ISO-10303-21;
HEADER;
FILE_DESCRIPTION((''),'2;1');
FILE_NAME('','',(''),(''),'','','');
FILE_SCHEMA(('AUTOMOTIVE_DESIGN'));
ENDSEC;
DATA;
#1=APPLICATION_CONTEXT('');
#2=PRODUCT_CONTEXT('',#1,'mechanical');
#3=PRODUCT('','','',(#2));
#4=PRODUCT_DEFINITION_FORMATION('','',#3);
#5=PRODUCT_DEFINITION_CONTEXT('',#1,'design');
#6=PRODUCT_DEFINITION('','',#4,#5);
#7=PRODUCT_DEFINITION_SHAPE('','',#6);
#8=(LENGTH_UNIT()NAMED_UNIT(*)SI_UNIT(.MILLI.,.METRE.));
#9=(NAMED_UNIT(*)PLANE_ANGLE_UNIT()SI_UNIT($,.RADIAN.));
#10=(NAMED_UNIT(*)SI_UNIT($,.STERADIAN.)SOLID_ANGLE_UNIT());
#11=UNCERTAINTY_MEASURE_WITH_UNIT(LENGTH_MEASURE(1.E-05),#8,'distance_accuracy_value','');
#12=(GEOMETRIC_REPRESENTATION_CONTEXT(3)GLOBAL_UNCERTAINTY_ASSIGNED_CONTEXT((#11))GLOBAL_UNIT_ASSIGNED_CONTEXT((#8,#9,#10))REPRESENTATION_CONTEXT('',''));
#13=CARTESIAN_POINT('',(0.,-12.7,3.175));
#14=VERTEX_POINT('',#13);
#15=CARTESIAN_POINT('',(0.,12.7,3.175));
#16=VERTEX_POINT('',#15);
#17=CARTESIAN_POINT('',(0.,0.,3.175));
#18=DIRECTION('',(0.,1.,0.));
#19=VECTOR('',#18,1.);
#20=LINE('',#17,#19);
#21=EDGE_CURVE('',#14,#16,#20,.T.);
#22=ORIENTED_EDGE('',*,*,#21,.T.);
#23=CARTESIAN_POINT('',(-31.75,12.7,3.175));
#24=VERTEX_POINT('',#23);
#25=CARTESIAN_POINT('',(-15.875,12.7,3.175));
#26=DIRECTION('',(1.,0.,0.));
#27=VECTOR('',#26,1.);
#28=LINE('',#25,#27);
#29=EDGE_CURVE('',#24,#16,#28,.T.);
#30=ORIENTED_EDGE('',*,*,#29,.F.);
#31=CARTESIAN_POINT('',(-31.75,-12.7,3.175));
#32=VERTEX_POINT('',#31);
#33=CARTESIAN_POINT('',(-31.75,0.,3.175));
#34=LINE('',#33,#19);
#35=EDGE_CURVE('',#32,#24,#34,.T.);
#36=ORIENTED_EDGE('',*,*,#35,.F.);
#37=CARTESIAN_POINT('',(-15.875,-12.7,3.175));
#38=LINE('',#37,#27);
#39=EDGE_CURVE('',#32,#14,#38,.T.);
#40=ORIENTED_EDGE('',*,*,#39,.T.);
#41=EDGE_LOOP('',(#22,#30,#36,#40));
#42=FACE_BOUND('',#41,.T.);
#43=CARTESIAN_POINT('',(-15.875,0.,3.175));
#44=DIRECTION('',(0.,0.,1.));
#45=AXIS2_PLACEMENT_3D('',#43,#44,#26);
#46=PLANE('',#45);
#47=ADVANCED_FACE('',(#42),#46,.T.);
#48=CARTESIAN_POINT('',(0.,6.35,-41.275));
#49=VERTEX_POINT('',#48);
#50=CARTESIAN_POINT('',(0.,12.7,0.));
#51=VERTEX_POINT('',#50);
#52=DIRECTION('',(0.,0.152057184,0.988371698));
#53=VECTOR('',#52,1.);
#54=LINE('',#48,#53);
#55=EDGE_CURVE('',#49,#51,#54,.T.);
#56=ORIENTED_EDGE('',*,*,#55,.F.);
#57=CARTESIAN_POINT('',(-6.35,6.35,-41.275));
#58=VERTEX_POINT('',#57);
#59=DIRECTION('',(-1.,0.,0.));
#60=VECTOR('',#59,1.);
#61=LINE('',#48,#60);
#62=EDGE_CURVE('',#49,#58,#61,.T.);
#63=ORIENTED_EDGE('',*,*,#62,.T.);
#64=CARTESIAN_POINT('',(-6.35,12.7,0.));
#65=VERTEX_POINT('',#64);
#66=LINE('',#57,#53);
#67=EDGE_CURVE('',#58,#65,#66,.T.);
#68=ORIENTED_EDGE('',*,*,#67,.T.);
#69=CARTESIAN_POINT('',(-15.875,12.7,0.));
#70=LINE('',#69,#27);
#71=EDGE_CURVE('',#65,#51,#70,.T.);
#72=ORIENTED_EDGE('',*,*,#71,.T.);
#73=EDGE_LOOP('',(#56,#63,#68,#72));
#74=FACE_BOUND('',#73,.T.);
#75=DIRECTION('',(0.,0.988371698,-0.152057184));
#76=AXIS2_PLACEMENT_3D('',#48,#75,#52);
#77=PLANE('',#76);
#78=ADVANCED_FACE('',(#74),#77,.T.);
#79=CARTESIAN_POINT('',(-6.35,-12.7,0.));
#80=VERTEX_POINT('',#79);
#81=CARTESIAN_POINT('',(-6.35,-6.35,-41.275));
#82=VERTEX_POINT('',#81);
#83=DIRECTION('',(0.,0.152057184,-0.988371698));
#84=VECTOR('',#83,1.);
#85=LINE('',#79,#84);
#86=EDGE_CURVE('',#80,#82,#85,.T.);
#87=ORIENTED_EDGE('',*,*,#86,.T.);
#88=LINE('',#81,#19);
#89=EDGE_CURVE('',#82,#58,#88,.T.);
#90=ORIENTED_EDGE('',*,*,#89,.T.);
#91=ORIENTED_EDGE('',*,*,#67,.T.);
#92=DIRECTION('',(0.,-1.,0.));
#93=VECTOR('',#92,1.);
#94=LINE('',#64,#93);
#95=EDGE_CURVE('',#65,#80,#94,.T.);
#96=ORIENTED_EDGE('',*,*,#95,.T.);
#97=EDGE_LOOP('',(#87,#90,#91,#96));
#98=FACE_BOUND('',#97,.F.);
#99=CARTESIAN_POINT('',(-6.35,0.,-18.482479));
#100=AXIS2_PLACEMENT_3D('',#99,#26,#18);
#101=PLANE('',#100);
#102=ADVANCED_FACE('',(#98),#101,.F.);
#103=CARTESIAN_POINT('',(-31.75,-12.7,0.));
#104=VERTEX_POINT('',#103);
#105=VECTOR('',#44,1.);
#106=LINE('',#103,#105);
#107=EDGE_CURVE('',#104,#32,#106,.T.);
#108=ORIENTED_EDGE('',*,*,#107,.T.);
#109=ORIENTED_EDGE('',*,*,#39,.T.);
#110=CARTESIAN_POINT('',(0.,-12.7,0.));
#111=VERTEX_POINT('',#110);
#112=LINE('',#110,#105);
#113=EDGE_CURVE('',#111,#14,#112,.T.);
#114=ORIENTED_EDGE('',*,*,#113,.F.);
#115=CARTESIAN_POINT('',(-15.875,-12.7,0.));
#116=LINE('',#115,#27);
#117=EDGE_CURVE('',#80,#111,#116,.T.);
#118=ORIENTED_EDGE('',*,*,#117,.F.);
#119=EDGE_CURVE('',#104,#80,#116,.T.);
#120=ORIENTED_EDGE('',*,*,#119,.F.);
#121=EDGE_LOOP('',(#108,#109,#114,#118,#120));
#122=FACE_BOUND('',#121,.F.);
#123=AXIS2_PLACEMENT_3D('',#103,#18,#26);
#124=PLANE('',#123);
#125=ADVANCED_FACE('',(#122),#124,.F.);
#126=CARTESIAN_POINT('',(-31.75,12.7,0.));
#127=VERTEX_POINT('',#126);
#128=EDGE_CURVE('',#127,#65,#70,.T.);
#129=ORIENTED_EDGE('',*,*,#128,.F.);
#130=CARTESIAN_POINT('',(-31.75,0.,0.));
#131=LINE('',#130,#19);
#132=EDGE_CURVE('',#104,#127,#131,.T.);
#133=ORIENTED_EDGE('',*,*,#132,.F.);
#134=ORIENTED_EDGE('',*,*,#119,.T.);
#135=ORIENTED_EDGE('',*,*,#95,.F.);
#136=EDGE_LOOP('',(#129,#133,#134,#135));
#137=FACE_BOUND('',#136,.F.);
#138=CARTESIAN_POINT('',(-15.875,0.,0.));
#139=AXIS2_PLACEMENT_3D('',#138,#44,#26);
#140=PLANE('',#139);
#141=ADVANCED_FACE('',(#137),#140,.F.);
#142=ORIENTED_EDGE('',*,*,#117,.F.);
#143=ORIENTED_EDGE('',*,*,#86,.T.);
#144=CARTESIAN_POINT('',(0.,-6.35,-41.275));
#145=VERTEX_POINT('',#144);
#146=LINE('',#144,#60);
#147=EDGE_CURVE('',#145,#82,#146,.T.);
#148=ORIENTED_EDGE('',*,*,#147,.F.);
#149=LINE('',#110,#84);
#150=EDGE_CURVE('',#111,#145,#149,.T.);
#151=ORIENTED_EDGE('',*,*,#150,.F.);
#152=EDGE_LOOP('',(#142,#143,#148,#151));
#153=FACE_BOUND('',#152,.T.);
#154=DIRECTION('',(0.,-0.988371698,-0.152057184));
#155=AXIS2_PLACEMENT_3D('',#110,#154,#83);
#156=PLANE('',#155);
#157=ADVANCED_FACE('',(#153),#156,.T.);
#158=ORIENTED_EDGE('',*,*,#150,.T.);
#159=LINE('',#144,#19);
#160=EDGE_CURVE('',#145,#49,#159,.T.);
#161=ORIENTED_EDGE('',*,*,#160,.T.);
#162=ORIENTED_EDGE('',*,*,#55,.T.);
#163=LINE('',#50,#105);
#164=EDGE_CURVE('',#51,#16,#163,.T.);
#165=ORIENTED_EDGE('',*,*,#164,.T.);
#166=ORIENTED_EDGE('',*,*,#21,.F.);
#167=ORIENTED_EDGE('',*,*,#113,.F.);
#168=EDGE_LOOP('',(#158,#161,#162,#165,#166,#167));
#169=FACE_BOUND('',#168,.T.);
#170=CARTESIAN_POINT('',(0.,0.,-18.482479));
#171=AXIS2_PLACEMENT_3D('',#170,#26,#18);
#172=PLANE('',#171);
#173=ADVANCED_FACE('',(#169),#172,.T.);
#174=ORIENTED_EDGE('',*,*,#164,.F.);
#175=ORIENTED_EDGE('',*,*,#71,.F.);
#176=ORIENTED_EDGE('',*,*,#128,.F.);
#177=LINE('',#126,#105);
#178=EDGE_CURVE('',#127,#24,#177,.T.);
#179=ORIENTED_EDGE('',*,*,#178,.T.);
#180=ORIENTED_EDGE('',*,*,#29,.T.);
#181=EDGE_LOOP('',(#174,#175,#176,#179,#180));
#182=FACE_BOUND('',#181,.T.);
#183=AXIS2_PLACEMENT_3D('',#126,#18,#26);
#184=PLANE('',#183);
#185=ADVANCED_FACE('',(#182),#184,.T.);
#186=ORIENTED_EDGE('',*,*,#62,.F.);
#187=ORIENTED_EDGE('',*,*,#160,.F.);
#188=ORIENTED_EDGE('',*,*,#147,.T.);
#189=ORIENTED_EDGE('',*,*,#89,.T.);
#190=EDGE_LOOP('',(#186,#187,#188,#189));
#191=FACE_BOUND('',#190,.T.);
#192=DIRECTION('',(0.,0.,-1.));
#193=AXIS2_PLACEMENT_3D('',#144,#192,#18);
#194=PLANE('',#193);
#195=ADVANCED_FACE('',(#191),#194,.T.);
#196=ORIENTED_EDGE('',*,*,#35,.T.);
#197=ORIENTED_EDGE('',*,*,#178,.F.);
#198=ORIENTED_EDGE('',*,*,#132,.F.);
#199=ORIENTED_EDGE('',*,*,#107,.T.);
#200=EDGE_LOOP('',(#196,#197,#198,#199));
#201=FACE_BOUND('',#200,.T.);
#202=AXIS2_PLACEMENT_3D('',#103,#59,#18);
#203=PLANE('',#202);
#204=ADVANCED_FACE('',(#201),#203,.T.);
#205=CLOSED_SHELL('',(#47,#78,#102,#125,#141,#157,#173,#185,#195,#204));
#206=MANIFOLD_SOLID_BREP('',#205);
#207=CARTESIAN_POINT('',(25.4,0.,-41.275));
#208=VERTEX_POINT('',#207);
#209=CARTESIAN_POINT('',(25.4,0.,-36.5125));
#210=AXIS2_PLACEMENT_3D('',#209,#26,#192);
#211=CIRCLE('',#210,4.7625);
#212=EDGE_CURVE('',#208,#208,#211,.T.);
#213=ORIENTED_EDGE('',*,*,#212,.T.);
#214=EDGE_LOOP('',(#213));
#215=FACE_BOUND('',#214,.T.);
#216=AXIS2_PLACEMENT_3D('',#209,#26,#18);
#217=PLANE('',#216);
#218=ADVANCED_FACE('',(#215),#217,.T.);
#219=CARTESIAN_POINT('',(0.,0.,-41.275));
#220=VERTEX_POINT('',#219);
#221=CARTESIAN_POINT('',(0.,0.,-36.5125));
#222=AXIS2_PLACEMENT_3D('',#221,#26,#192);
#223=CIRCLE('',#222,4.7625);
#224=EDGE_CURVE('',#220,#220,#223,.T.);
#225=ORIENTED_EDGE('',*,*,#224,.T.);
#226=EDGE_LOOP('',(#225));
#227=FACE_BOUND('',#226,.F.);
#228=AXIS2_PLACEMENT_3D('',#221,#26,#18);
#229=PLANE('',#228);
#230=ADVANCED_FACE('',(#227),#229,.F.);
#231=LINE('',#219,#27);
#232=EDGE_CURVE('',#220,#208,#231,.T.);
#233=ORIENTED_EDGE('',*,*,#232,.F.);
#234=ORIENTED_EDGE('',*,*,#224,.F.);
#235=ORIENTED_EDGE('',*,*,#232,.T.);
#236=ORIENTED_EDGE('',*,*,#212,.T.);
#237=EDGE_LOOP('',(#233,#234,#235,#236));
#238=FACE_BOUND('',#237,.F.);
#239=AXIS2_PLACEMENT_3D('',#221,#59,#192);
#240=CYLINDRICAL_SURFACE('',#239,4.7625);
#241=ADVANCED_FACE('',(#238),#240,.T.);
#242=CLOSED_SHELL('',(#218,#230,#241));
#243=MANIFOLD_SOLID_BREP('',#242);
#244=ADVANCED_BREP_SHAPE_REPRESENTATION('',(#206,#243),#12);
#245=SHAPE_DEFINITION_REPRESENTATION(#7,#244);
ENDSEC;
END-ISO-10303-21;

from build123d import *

# Parameters (mm, degrees)
F0_W     = 31.75
F0_H     = 25.4
F2_DEPTH = 3.175
F3_DEPTH = 6.35
F4_DEPTH = 25.4


# Not quite as in the source:
# - a length typed as a fraction of an inch, garbled in the dataset ("3 / 203.2 mm" for 3/8 in), is restored
# - a feature names something its author has since deleted; it is built from what else it names


with BuildPart() as f2:
    # F0 (on Top) → F2 (new body)
    with BuildSketch(Plane.XY):
        with Locations((-15.875, 0)):
            Rectangle(F0_W, F0_H)
    extrude(amount=F2_DEPTH)

    # F1 (on Right) → F3 (join)
    with BuildSketch(Plane.YZ):
        Polygon((12.7, 0), (-12.7, 0), (-6.35, -41.275), (0, -41.275), (6.35, -41.275), align=None)
        with BuildLine():
            ThreePointArc((4.7625, -36.5125), (3.3675960454, -39.8800960454), (0, -41.275))
            ThreePointArc((0, -41.275), (-3.3675960454, -33.1449039546), (4.7625, -36.5125))
        make_face(mode=Mode.SUBTRACT)
        with BuildLine():
            ThreePointArc((4.7625, -36.5125), (-3.3675960454, -33.1449039546), (0, -41.275))
            ThreePointArc((0, -41.275), (3.3675960454, -39.8800960454), (4.7625, -36.5125))
        make_face()
    extrude(amount=-F3_DEPTH)


with BuildPart() as f4:
    # F1 (on Right) → F4 (new body)
    with BuildSketch(Plane.YZ):
        with BuildLine():
            ThreePointArc((4.7625, -36.5125), (-3.3675960454, -33.1449039546), (0, -41.275))
            ThreePointArc((0, -41.275), (3.3675960454, -39.8800960454), (4.7625, -36.5125))
        make_face()
    extrude(amount=F4_DEPTH)


solid = Compound([f2.part, f4.part])
